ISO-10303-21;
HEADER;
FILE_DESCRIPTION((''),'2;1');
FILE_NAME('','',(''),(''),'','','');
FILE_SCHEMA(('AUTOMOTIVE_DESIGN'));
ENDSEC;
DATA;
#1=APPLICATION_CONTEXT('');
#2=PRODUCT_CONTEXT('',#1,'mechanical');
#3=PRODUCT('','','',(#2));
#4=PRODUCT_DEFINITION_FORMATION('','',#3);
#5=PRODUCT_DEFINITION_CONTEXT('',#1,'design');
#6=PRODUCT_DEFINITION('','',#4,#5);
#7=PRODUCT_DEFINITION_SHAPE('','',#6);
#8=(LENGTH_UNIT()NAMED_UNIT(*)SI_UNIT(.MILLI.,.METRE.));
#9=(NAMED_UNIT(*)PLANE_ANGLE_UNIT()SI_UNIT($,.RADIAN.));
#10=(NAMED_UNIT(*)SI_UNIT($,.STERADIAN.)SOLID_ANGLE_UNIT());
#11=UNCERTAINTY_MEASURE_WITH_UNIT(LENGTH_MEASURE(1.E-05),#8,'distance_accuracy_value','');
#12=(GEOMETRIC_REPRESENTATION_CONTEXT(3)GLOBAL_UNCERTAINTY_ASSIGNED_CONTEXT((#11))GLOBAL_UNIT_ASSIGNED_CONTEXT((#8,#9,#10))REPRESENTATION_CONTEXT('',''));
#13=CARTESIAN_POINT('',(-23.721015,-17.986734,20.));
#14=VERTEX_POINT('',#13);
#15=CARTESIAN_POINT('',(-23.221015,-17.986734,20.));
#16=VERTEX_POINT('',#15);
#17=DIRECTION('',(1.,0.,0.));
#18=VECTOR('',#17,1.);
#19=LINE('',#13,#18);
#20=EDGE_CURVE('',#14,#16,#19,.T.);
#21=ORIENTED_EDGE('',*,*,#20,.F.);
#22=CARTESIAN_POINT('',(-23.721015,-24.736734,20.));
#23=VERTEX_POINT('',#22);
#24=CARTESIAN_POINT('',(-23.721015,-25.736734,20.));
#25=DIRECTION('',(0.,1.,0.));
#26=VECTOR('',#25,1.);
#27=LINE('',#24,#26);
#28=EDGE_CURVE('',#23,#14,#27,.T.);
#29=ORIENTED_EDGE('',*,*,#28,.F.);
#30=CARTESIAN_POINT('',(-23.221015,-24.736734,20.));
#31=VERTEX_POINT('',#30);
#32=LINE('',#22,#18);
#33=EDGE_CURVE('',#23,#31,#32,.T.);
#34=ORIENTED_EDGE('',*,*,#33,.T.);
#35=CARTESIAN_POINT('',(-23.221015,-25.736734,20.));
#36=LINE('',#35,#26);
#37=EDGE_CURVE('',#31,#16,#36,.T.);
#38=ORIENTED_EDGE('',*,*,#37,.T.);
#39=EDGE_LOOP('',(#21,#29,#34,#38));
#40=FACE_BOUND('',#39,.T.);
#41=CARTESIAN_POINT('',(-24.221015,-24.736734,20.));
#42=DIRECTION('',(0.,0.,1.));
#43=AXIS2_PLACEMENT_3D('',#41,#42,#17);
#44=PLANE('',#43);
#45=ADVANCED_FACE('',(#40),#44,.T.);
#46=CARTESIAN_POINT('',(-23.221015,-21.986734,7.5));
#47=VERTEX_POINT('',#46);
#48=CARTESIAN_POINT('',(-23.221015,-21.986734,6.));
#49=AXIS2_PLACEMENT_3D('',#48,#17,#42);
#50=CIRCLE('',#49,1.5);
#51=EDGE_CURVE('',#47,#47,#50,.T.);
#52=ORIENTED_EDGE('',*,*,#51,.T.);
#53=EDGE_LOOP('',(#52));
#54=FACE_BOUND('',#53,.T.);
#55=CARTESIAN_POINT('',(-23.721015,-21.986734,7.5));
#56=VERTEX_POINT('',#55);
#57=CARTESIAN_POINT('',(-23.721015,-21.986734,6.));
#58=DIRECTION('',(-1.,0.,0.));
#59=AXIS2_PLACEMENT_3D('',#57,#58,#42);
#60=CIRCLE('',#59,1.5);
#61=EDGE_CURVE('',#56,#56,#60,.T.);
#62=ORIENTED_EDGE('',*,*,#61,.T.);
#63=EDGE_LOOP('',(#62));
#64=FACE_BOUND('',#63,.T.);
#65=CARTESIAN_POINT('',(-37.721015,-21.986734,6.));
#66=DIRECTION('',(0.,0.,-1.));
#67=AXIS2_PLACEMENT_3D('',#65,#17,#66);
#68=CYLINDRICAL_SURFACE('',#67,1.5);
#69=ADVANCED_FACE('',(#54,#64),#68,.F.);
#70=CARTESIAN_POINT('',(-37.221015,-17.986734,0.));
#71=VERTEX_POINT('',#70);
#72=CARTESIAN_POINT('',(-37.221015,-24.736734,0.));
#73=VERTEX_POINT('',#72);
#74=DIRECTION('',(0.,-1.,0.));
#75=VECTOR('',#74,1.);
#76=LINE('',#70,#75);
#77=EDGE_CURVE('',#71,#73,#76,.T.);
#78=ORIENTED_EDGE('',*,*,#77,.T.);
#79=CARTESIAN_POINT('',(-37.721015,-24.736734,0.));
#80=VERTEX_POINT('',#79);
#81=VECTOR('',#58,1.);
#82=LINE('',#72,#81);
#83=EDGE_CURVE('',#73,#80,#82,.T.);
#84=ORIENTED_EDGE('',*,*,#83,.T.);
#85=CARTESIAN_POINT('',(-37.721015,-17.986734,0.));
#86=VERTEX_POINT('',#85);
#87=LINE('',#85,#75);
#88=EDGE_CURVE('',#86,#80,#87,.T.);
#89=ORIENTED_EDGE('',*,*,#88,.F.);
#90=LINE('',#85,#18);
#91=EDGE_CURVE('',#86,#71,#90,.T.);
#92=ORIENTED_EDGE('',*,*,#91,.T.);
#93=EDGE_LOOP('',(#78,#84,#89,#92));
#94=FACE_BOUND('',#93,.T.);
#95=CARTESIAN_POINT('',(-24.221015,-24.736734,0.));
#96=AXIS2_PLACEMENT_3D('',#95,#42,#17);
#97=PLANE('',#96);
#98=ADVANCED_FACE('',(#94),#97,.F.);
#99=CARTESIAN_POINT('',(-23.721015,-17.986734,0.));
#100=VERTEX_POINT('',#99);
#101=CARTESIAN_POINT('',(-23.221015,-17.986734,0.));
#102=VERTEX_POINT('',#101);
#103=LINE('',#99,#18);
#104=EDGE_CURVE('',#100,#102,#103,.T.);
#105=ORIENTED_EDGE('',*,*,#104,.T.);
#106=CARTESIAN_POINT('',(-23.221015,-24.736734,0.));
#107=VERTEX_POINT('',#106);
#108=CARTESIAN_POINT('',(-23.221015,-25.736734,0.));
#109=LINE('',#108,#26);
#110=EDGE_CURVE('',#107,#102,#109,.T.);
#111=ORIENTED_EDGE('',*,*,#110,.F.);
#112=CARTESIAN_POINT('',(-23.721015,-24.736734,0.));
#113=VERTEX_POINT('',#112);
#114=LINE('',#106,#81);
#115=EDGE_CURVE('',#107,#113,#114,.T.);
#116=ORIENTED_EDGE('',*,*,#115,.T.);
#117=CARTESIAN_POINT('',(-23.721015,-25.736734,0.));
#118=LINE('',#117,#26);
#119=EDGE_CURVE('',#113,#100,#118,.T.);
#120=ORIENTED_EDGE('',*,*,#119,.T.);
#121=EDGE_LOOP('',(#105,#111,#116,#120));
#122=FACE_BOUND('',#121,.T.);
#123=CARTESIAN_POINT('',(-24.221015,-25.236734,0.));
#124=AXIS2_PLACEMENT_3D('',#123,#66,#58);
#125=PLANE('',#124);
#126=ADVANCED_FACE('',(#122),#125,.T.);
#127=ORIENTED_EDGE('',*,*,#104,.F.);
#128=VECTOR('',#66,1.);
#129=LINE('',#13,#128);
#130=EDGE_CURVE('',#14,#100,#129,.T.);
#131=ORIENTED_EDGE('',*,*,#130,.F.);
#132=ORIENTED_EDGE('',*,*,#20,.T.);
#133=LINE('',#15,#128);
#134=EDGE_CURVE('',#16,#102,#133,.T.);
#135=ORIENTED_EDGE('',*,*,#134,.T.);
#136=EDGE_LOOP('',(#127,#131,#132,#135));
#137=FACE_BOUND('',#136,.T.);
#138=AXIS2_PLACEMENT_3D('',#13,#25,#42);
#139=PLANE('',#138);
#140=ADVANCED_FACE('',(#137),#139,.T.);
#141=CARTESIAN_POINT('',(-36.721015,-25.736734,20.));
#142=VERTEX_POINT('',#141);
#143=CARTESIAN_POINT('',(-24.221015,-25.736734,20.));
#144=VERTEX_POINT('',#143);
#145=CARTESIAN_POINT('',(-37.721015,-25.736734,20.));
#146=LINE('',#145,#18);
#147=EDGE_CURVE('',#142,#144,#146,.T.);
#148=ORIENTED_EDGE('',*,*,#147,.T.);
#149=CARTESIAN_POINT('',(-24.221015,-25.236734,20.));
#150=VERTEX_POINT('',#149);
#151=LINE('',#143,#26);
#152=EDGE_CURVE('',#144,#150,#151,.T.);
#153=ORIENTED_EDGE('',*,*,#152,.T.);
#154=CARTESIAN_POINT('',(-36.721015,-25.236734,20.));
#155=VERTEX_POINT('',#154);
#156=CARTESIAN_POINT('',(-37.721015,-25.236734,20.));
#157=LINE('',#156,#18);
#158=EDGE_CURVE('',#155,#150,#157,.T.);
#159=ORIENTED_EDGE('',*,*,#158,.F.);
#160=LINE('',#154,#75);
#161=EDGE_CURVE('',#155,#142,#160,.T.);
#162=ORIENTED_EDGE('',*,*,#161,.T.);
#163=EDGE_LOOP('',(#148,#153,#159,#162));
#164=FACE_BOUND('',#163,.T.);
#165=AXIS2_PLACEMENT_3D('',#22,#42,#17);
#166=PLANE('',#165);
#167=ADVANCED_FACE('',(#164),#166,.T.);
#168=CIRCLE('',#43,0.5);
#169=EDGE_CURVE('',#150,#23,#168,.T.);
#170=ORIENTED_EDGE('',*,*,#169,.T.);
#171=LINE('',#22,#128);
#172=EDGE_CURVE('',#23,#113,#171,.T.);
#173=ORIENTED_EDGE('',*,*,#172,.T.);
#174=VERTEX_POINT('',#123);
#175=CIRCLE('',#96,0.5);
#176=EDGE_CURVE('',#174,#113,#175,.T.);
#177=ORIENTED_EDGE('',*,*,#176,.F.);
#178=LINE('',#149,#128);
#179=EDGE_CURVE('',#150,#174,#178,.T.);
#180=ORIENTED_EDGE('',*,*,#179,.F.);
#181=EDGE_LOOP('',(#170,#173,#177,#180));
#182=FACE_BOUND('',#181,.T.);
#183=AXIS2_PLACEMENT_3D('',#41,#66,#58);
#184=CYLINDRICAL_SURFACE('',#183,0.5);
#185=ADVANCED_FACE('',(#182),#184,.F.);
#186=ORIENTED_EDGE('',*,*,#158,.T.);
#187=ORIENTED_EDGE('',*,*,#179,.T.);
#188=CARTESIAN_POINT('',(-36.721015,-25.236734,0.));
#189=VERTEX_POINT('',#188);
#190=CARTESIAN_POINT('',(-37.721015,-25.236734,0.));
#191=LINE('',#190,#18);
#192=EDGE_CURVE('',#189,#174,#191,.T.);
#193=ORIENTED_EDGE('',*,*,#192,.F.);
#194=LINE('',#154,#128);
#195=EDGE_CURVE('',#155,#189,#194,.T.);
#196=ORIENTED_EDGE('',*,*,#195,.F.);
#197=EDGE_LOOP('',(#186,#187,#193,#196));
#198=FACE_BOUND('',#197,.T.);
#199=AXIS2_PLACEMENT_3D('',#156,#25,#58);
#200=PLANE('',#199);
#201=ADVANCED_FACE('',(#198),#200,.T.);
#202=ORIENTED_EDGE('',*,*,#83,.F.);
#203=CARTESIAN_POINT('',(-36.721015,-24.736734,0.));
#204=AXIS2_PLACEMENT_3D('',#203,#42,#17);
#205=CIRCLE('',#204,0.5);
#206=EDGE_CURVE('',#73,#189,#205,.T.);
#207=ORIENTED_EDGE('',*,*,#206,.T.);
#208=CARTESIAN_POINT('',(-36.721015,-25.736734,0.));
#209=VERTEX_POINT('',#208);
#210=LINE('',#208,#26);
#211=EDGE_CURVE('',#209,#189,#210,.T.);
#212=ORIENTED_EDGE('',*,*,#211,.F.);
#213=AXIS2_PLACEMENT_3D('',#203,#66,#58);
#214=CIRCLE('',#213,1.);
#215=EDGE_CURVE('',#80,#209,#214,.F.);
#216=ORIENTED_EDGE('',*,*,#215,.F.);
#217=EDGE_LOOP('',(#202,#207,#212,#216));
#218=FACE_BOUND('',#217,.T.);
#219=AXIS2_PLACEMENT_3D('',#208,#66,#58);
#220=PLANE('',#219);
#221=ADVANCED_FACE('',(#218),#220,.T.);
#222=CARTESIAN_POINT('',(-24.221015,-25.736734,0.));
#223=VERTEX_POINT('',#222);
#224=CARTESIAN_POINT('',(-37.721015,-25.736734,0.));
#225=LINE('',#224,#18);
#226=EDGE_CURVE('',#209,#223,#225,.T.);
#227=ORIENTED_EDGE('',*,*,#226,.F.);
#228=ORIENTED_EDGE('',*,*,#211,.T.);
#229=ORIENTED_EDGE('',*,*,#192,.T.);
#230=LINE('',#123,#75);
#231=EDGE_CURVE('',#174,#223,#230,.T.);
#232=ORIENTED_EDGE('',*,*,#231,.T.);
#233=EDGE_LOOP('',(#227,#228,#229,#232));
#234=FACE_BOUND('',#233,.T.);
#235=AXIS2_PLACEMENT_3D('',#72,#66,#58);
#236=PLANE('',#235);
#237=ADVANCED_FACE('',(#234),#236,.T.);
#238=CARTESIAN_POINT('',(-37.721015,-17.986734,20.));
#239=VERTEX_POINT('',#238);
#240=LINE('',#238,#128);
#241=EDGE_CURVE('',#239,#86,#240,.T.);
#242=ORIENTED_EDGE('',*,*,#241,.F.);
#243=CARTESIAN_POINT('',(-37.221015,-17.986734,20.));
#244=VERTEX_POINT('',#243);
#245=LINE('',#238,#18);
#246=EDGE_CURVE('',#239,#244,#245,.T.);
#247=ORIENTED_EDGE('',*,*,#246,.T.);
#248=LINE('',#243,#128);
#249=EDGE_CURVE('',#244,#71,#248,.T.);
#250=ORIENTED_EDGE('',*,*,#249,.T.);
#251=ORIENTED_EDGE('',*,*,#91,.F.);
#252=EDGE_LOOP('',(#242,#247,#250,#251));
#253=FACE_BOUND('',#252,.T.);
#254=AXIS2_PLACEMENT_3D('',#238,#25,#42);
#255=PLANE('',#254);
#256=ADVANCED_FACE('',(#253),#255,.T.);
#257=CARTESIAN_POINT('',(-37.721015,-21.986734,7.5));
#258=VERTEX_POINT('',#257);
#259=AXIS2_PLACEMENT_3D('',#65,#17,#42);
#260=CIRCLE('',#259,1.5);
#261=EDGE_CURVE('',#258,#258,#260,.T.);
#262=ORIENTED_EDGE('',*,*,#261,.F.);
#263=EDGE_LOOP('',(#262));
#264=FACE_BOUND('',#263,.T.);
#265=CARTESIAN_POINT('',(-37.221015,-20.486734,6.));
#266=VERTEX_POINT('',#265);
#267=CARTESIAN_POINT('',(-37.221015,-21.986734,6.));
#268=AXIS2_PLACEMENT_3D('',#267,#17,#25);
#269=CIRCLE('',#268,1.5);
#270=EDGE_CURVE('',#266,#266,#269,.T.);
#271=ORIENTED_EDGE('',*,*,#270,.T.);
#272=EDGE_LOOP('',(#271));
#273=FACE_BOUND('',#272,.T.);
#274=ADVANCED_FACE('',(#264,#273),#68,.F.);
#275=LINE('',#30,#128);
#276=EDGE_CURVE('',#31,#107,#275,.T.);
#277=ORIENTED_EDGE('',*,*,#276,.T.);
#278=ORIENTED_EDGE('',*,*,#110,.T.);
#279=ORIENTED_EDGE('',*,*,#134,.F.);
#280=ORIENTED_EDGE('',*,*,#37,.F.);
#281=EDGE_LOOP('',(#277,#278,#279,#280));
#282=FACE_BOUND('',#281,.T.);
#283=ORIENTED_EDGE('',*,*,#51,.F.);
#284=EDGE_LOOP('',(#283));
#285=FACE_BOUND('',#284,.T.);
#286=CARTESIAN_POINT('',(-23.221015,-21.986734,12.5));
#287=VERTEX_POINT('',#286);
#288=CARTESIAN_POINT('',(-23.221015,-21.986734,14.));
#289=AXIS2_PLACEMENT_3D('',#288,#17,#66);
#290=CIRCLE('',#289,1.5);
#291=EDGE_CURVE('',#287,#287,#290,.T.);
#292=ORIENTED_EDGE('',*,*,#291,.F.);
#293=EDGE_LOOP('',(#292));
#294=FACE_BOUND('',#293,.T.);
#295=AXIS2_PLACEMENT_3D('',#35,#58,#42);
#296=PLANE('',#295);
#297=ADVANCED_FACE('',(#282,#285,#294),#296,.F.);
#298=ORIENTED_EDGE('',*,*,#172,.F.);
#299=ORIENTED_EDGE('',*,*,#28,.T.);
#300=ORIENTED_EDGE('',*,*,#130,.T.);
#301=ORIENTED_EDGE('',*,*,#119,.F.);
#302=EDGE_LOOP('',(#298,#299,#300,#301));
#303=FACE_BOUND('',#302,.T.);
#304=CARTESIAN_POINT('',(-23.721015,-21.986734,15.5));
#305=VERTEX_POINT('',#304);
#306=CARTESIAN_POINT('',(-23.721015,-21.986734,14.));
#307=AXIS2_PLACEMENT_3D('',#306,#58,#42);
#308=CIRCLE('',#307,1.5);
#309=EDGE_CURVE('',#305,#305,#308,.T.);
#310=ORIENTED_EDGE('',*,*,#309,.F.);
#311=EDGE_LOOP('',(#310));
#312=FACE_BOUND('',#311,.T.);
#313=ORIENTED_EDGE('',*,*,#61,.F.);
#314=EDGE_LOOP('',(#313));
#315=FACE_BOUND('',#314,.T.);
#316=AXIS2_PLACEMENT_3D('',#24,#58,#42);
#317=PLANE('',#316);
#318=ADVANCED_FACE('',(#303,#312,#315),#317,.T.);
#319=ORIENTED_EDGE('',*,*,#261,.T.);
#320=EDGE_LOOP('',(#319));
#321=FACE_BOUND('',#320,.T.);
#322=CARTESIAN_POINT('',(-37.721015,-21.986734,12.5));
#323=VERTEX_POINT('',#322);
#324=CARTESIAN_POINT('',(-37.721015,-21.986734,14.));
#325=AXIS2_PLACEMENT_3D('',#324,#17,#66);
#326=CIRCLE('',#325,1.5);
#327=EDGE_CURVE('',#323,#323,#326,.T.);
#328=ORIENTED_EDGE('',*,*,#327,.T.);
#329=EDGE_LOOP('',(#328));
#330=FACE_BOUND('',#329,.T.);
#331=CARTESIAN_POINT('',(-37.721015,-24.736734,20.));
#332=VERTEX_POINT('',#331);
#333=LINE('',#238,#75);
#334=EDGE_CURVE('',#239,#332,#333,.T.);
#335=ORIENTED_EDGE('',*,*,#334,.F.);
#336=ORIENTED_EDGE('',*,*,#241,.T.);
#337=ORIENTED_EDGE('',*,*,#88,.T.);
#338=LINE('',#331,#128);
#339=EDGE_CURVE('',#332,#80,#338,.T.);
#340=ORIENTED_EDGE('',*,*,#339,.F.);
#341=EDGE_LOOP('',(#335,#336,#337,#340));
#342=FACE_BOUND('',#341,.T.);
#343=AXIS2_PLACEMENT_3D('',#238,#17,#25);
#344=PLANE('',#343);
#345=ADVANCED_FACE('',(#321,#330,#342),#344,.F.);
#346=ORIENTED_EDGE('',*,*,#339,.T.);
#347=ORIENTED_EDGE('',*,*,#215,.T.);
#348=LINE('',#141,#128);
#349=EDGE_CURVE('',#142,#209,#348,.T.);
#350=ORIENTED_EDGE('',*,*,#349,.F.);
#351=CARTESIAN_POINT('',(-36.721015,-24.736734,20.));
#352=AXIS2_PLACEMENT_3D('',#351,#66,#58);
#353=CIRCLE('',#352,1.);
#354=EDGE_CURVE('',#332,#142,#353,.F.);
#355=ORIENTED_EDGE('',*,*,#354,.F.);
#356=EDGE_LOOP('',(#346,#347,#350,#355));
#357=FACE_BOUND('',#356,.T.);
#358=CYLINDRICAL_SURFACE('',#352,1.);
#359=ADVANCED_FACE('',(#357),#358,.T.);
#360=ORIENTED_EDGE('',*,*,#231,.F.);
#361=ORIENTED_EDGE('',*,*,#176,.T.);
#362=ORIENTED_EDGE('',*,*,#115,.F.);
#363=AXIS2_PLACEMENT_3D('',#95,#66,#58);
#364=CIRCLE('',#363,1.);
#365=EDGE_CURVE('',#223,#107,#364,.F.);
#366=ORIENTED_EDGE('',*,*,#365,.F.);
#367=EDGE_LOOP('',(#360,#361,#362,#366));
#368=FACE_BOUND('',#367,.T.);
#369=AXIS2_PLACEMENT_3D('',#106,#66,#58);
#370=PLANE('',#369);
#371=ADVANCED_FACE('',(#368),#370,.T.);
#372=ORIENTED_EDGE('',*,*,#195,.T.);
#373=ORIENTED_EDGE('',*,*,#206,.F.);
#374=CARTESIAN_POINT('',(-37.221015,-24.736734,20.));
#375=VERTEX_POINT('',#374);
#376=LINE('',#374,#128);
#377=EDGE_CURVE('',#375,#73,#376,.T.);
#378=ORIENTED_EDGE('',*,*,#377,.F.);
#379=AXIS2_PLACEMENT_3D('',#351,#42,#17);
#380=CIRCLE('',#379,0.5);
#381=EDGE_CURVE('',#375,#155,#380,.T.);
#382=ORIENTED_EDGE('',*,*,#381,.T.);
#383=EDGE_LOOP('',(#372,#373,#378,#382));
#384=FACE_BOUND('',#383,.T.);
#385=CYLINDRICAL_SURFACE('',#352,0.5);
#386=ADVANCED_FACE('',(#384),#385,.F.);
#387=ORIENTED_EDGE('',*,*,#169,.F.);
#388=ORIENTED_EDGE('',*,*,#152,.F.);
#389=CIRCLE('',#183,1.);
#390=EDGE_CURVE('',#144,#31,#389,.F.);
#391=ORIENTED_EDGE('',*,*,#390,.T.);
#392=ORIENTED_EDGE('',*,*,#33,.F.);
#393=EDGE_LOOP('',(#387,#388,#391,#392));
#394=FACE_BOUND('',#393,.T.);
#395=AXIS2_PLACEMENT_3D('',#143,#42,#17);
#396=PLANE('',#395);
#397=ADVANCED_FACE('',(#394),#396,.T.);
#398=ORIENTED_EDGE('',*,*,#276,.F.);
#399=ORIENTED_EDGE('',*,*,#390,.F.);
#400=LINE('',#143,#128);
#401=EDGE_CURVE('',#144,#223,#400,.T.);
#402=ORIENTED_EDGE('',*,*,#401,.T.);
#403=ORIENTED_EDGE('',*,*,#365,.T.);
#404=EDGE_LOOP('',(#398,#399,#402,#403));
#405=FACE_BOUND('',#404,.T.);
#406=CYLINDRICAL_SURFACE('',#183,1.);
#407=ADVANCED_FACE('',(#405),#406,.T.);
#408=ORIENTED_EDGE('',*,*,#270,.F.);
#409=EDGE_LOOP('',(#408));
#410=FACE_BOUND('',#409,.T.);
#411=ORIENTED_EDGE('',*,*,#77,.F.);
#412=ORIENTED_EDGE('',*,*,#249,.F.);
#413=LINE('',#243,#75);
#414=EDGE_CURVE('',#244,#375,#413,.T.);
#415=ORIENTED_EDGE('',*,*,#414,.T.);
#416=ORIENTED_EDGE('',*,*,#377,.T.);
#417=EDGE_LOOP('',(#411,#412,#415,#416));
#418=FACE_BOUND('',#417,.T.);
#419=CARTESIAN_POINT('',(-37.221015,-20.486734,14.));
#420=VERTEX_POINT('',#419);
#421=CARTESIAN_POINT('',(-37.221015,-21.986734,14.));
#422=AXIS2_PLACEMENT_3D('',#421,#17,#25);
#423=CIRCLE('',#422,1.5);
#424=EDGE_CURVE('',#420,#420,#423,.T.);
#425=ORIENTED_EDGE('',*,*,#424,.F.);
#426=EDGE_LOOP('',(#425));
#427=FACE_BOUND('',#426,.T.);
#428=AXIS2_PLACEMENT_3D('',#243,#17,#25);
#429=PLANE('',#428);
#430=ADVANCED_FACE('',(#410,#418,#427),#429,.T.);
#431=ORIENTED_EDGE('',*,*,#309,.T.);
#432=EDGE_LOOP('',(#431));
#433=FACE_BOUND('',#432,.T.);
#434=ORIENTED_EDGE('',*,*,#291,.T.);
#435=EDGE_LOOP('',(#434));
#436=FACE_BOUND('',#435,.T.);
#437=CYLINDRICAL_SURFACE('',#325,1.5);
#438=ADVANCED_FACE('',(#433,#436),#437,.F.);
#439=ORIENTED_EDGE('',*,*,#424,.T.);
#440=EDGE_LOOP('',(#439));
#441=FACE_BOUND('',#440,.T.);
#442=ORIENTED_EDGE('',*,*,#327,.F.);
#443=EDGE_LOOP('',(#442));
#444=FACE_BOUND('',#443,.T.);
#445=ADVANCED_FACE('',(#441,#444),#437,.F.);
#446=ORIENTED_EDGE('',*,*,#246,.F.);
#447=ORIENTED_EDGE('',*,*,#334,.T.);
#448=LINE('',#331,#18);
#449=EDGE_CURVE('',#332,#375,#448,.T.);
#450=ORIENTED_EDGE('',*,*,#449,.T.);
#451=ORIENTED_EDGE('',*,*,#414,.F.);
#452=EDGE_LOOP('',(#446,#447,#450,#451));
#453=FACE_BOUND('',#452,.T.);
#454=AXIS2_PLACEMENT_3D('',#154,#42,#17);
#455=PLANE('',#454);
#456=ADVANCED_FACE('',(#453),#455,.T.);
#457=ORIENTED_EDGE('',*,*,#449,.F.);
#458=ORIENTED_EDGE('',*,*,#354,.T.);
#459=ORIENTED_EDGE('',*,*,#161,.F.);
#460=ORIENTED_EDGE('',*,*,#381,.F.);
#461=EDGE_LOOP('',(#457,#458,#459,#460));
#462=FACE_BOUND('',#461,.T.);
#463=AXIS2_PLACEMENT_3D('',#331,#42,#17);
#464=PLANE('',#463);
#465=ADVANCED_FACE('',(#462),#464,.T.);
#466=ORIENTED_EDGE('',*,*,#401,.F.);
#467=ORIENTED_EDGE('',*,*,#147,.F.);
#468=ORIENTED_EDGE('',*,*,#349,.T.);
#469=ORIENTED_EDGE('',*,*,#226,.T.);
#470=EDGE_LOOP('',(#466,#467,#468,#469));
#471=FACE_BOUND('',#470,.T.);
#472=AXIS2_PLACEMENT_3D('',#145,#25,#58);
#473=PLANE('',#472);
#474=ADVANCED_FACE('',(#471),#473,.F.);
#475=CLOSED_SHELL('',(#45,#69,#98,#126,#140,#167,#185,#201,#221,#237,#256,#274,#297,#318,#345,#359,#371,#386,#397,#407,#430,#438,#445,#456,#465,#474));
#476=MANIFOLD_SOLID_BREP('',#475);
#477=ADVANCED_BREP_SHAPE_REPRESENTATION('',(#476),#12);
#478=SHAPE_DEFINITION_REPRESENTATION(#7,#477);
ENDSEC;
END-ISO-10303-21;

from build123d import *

# Parameters (mm, degrees)
BRIDA_BASE1_DEPTH     = 20
CROQUIS5_R            = 1.5
CORTAR_EXTRUIR1_DEPTH = 36.673932989


# Sheet-metal steps are written as plain solids
with BuildPart() as part:
    # Croquis1 → Brida base1 (new body)
    with BuildSketch(Plane.XY):
        with BuildLine():
            Line((-37.721015228, -17.986734349), (-37.721015228, -24.736734349))
            ThreePointArc((-37.721015228, -24.736734349), (-37.42812201, -25.44384113), (-36.721015228, -25.736734349))
            Line((-36.721015228, -25.736734349), (-24.221015228, -25.736734349))
            ThreePointArc((-24.221015228, -25.736734349), (-23.513908447, -25.44384113), (-23.221015228, -24.736734349))
            Line((-23.221015228, -24.736734349), (-23.221015228, -17.986734349))
            Line((-23.221015228, -17.986734349), (-23.721015228, -17.986734349))
            Line((-23.721015228, -17.986734349), (-23.721015228, -24.736734349))
            ThreePointArc((-23.721015228, -24.736734349), (-23.867461838, -25.090287739), (-24.221015228, -25.236734349))
            Line((-24.221015228, -25.236734349), (-36.721015228, -25.236734349))
            ThreePointArc((-36.721015228, -25.236734349), (-37.074568619, -25.090287739), (-37.221015228, -24.736734349))
            Line((-37.221015228, -24.736734349), (-37.221015228, -17.986734349))
            Line((-37.221015228, -17.986734349), (-37.721015228, -17.986734349))
        make_face()
    extrude(amount=BRIDA_BASE1_DEPTH)

    # Croquis5 → Cortar-Extruir1 (cut, through all)
    with BuildSketch(Plane(origin=(-23.221015228, 0, 0), x_dir=(0, 0, -1), z_dir=(1, 0, 0))):
        with Locations((-14, -21.986734349)):
            Circle(CROQUIS5_R)
        with Locations(Location((-6, -21.986734349, 0), (0, 0, 90))):
            Circle(CROQUIS5_R)
    extrude(amount=-CORTAR_EXTRUIR1_DEPTH, mode=Mode.SUBTRACT)


solid = part.part
